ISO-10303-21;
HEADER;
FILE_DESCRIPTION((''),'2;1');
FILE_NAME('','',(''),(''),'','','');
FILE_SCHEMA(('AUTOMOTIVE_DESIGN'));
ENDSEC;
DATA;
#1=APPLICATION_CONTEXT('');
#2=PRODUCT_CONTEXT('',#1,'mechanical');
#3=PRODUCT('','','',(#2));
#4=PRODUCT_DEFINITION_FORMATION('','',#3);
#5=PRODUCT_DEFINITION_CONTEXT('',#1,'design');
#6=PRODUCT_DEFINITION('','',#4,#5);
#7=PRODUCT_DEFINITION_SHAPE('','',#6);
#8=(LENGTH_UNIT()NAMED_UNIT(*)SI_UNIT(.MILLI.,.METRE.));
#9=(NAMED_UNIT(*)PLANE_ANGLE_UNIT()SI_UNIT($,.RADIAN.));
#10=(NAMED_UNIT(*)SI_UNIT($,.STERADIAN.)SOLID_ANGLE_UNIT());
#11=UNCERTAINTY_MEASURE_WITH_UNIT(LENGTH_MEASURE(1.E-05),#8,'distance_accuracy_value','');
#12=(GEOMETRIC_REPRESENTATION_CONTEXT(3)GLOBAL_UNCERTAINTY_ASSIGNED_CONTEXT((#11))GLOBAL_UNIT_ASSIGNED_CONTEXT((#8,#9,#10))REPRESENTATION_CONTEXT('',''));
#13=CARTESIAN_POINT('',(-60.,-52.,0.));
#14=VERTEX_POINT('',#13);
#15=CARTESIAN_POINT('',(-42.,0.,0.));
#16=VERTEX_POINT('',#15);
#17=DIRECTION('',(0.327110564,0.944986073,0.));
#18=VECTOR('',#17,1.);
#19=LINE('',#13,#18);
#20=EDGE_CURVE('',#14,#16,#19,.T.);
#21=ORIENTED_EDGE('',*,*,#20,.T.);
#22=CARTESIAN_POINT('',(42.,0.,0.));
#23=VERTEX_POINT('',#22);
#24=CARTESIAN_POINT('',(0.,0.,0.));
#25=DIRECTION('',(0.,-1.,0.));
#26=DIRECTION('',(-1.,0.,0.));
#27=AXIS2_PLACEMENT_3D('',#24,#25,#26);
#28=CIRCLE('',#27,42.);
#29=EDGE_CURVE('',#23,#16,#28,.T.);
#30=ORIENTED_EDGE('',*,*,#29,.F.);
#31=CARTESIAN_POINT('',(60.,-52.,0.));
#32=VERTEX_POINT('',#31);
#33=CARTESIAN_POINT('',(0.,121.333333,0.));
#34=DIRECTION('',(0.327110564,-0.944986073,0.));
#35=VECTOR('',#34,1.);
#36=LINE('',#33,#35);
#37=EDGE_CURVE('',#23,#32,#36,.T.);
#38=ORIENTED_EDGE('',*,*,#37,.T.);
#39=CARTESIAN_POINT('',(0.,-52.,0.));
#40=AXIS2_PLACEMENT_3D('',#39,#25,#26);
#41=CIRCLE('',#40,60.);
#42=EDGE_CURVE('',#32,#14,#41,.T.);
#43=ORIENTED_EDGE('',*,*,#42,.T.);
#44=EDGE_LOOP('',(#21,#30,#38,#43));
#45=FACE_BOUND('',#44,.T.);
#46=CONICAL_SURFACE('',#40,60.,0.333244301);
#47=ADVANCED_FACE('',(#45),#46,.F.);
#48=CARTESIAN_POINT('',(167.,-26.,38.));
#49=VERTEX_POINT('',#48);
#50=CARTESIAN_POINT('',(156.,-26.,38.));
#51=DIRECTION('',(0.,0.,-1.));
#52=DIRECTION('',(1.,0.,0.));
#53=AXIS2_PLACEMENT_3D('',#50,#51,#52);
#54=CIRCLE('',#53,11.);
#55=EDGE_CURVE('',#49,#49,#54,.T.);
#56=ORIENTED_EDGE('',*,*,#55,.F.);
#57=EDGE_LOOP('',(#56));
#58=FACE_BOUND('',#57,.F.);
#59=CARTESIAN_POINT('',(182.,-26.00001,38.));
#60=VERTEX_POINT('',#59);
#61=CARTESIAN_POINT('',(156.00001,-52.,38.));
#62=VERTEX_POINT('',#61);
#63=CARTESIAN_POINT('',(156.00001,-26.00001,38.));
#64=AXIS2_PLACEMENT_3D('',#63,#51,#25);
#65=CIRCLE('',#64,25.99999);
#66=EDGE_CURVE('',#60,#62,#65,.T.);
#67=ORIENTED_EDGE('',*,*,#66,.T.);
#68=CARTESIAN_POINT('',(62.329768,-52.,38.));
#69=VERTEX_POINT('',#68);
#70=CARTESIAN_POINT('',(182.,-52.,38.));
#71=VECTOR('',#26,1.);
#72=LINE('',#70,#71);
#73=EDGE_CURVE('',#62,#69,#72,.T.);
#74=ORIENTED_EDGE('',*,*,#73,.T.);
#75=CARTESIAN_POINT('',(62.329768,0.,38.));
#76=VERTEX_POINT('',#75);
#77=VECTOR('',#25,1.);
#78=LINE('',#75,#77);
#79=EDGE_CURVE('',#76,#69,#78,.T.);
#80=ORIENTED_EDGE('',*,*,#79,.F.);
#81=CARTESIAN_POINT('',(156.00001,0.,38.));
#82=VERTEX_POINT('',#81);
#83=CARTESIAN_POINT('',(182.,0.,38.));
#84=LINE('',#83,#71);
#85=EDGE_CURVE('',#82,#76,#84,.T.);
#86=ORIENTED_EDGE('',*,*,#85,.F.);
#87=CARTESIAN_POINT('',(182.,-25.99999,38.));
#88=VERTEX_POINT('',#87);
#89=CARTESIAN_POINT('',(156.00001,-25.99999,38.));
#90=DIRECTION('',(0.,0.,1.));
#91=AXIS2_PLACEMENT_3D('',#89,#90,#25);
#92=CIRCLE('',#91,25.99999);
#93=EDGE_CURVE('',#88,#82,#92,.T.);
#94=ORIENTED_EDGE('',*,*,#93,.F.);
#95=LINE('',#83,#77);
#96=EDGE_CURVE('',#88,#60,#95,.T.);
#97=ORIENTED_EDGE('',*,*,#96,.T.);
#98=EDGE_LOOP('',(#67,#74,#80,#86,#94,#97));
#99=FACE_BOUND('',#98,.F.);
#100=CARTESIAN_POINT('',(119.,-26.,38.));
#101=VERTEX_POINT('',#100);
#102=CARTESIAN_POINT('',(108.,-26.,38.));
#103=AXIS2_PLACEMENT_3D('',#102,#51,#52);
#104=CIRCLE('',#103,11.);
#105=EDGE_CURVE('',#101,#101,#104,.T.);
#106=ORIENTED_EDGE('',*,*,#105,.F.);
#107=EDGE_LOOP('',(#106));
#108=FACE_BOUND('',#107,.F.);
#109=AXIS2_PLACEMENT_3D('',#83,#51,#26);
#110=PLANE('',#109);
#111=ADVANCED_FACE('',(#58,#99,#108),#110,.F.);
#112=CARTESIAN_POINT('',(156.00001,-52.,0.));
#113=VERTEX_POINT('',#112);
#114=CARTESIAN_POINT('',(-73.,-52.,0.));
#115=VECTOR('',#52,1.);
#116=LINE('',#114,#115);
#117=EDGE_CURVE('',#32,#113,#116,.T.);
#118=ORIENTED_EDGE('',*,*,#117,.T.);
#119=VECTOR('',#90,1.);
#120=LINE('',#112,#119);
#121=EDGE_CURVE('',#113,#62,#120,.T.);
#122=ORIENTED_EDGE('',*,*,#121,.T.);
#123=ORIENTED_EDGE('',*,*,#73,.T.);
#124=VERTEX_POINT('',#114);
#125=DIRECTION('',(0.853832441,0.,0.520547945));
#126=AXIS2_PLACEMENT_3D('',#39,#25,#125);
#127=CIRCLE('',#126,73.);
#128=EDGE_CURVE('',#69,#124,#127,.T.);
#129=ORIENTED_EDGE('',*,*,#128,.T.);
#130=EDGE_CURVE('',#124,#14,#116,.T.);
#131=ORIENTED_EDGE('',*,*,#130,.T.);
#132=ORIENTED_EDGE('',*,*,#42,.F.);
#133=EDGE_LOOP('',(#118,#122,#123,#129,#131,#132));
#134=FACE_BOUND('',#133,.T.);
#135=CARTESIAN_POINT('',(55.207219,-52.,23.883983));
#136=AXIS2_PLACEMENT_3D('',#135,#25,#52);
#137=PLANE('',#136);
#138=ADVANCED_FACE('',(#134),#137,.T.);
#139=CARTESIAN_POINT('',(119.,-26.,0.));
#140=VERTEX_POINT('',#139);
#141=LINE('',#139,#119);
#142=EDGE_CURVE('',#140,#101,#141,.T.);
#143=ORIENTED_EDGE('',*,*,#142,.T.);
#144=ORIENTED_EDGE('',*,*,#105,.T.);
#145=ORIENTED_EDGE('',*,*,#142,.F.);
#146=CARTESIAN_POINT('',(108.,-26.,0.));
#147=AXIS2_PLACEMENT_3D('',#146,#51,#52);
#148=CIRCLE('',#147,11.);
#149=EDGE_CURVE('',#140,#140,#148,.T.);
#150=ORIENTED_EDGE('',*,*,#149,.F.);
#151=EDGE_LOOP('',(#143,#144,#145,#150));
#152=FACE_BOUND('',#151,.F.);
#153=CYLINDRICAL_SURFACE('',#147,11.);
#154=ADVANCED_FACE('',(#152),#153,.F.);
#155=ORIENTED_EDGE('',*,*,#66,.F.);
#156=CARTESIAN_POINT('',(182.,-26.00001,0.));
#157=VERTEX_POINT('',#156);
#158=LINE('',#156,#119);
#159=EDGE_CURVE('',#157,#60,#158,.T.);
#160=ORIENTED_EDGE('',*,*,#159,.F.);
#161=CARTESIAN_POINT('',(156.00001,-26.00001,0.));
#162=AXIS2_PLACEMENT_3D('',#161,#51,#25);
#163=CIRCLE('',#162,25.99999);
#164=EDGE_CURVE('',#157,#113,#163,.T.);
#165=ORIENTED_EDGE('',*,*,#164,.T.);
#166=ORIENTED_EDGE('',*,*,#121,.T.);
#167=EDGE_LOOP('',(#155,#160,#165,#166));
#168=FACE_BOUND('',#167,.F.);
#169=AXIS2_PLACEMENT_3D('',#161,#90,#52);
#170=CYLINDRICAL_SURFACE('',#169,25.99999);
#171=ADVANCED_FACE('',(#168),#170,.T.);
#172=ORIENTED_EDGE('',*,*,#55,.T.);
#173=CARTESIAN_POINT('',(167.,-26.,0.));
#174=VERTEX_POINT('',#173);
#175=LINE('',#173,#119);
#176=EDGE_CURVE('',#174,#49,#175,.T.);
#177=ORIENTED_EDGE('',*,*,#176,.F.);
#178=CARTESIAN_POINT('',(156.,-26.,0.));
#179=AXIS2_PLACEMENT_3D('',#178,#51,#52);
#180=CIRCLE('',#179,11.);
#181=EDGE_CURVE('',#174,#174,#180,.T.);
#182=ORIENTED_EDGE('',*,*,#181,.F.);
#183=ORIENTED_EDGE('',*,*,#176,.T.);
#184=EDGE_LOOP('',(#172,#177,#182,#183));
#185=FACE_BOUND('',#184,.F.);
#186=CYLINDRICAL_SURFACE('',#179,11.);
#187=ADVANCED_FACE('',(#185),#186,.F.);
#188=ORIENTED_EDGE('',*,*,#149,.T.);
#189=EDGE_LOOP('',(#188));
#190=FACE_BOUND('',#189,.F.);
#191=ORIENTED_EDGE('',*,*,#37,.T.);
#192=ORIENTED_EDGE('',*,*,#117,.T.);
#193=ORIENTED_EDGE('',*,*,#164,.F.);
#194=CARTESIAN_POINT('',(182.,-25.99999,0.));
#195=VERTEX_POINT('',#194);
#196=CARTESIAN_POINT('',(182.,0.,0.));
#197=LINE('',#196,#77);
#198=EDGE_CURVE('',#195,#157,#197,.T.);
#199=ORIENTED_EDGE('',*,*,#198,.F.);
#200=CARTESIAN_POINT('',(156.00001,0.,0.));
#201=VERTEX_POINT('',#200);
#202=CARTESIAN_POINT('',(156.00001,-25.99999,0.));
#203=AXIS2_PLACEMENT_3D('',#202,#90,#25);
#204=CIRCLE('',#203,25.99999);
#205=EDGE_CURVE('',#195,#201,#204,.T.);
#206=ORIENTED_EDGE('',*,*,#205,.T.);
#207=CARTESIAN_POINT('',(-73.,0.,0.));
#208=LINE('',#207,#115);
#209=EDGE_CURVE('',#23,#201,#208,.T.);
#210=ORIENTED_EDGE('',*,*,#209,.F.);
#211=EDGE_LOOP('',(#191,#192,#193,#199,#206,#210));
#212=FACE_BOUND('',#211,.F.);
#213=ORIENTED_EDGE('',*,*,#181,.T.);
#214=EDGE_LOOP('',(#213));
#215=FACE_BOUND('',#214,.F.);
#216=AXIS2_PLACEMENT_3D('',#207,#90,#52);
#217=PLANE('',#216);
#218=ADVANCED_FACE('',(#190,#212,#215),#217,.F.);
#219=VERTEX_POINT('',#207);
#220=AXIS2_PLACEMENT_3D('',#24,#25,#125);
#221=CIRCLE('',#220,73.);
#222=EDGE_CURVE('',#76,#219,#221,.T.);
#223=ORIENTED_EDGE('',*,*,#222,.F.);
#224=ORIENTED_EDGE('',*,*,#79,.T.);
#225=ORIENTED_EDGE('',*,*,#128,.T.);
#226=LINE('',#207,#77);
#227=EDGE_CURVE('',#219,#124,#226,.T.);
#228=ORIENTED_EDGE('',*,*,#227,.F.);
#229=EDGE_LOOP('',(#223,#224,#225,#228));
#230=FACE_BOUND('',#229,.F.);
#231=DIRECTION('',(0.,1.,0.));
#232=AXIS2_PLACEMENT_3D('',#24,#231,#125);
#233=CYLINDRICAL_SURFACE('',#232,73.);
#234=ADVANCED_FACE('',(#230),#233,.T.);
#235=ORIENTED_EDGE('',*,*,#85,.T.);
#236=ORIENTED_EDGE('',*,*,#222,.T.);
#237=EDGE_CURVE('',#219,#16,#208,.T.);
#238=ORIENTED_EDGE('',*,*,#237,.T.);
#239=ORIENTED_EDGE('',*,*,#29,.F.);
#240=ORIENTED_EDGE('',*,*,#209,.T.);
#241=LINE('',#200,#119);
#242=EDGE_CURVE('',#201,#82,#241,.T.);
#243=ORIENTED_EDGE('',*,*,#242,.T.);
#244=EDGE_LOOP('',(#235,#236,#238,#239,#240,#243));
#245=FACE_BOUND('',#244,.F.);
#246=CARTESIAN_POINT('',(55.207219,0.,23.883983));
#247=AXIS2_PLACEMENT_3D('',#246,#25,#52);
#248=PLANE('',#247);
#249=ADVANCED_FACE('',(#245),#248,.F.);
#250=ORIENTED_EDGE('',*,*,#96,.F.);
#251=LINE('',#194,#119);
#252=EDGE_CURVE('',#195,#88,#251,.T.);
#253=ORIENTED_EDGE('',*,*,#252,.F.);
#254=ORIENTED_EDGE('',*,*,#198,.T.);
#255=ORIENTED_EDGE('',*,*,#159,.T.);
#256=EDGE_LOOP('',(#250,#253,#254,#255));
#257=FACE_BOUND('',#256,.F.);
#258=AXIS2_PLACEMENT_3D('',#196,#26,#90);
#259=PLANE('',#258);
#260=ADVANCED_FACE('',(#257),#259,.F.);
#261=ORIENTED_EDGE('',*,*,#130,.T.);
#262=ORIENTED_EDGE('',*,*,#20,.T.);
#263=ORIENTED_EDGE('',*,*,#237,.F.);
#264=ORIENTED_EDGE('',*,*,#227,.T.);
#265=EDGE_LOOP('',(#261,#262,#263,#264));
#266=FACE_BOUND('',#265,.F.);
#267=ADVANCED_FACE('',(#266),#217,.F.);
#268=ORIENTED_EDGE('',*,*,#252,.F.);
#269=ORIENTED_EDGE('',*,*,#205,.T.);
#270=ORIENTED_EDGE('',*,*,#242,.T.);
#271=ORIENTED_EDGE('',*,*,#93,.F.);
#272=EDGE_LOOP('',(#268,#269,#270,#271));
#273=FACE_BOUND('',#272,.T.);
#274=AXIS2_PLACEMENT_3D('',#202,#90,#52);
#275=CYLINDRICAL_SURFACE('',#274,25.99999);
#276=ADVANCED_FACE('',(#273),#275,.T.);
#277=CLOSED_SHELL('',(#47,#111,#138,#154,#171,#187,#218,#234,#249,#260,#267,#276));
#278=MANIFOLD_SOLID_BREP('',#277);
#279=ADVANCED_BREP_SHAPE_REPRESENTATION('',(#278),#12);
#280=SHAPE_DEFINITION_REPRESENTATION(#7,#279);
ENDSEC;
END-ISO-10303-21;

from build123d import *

# Parameters (mm, degrees)
F1_DEPTH = 52
F4_R     = 11
F5_DEPTH = 77
F6_R     = 25.99999


# Not quite as in the source:
# - a fillet or chamfer is up to 0.001 mm smaller than in the source, because OpenCascade refuses the exact size


with BuildPart() as f1:
    # F0 (on Front) → F1 (new body)
    with BuildSketch(Plane.XZ):
        with BuildLine():
            Line((182, 38), (62.329768169, 38))
            ThreePointArc((62.329768169, 38), (-19.7348286497, 70.2818364741), (-73, 0))
            Line((-73, 0), (182, 0))
            Line((182, 0), (182, 38))
        make_face()
    extrude(amount=F1_DEPTH)

    # F2 (on face) → F3 (revolve, cut)
    with BuildSketch(Plane(origin=(0, 0, 0), x_dir=(1, 0, 0), z_dir=(0, 0, -1))):
        Polygon((0, 52), (-60, 52), (-42, 0), (0, 0), align=None)
    revolve(axis=Axis((0, -26, 0), (0, -1, 0)), mode=Mode.SUBTRACT)

    # F4 (on face) → F5 (cut)
    with BuildSketch(Plane(origin=(0, 0, 0), x_dir=(1, 0, 0), z_dir=(0, 0, -1))):
        with Locations((108, 26)):
            Circle(F4_R)
        with Locations((156, 26)):
            Circle(F4_R)
    extrude(amount=-F5_DEPTH, mode=Mode.SUBTRACT)

    # F6 (radius 26 in the source; OpenCascade refuses exactly that, so slightly less here)
    f6_edges = [f1.edges().sort_by_distance(p)[0] for p in [
        (182, -52, 19),
        (182, 0, 19),
    ]]
    fillet(f6_edges, radius=F6_R)


solid = f1.part
